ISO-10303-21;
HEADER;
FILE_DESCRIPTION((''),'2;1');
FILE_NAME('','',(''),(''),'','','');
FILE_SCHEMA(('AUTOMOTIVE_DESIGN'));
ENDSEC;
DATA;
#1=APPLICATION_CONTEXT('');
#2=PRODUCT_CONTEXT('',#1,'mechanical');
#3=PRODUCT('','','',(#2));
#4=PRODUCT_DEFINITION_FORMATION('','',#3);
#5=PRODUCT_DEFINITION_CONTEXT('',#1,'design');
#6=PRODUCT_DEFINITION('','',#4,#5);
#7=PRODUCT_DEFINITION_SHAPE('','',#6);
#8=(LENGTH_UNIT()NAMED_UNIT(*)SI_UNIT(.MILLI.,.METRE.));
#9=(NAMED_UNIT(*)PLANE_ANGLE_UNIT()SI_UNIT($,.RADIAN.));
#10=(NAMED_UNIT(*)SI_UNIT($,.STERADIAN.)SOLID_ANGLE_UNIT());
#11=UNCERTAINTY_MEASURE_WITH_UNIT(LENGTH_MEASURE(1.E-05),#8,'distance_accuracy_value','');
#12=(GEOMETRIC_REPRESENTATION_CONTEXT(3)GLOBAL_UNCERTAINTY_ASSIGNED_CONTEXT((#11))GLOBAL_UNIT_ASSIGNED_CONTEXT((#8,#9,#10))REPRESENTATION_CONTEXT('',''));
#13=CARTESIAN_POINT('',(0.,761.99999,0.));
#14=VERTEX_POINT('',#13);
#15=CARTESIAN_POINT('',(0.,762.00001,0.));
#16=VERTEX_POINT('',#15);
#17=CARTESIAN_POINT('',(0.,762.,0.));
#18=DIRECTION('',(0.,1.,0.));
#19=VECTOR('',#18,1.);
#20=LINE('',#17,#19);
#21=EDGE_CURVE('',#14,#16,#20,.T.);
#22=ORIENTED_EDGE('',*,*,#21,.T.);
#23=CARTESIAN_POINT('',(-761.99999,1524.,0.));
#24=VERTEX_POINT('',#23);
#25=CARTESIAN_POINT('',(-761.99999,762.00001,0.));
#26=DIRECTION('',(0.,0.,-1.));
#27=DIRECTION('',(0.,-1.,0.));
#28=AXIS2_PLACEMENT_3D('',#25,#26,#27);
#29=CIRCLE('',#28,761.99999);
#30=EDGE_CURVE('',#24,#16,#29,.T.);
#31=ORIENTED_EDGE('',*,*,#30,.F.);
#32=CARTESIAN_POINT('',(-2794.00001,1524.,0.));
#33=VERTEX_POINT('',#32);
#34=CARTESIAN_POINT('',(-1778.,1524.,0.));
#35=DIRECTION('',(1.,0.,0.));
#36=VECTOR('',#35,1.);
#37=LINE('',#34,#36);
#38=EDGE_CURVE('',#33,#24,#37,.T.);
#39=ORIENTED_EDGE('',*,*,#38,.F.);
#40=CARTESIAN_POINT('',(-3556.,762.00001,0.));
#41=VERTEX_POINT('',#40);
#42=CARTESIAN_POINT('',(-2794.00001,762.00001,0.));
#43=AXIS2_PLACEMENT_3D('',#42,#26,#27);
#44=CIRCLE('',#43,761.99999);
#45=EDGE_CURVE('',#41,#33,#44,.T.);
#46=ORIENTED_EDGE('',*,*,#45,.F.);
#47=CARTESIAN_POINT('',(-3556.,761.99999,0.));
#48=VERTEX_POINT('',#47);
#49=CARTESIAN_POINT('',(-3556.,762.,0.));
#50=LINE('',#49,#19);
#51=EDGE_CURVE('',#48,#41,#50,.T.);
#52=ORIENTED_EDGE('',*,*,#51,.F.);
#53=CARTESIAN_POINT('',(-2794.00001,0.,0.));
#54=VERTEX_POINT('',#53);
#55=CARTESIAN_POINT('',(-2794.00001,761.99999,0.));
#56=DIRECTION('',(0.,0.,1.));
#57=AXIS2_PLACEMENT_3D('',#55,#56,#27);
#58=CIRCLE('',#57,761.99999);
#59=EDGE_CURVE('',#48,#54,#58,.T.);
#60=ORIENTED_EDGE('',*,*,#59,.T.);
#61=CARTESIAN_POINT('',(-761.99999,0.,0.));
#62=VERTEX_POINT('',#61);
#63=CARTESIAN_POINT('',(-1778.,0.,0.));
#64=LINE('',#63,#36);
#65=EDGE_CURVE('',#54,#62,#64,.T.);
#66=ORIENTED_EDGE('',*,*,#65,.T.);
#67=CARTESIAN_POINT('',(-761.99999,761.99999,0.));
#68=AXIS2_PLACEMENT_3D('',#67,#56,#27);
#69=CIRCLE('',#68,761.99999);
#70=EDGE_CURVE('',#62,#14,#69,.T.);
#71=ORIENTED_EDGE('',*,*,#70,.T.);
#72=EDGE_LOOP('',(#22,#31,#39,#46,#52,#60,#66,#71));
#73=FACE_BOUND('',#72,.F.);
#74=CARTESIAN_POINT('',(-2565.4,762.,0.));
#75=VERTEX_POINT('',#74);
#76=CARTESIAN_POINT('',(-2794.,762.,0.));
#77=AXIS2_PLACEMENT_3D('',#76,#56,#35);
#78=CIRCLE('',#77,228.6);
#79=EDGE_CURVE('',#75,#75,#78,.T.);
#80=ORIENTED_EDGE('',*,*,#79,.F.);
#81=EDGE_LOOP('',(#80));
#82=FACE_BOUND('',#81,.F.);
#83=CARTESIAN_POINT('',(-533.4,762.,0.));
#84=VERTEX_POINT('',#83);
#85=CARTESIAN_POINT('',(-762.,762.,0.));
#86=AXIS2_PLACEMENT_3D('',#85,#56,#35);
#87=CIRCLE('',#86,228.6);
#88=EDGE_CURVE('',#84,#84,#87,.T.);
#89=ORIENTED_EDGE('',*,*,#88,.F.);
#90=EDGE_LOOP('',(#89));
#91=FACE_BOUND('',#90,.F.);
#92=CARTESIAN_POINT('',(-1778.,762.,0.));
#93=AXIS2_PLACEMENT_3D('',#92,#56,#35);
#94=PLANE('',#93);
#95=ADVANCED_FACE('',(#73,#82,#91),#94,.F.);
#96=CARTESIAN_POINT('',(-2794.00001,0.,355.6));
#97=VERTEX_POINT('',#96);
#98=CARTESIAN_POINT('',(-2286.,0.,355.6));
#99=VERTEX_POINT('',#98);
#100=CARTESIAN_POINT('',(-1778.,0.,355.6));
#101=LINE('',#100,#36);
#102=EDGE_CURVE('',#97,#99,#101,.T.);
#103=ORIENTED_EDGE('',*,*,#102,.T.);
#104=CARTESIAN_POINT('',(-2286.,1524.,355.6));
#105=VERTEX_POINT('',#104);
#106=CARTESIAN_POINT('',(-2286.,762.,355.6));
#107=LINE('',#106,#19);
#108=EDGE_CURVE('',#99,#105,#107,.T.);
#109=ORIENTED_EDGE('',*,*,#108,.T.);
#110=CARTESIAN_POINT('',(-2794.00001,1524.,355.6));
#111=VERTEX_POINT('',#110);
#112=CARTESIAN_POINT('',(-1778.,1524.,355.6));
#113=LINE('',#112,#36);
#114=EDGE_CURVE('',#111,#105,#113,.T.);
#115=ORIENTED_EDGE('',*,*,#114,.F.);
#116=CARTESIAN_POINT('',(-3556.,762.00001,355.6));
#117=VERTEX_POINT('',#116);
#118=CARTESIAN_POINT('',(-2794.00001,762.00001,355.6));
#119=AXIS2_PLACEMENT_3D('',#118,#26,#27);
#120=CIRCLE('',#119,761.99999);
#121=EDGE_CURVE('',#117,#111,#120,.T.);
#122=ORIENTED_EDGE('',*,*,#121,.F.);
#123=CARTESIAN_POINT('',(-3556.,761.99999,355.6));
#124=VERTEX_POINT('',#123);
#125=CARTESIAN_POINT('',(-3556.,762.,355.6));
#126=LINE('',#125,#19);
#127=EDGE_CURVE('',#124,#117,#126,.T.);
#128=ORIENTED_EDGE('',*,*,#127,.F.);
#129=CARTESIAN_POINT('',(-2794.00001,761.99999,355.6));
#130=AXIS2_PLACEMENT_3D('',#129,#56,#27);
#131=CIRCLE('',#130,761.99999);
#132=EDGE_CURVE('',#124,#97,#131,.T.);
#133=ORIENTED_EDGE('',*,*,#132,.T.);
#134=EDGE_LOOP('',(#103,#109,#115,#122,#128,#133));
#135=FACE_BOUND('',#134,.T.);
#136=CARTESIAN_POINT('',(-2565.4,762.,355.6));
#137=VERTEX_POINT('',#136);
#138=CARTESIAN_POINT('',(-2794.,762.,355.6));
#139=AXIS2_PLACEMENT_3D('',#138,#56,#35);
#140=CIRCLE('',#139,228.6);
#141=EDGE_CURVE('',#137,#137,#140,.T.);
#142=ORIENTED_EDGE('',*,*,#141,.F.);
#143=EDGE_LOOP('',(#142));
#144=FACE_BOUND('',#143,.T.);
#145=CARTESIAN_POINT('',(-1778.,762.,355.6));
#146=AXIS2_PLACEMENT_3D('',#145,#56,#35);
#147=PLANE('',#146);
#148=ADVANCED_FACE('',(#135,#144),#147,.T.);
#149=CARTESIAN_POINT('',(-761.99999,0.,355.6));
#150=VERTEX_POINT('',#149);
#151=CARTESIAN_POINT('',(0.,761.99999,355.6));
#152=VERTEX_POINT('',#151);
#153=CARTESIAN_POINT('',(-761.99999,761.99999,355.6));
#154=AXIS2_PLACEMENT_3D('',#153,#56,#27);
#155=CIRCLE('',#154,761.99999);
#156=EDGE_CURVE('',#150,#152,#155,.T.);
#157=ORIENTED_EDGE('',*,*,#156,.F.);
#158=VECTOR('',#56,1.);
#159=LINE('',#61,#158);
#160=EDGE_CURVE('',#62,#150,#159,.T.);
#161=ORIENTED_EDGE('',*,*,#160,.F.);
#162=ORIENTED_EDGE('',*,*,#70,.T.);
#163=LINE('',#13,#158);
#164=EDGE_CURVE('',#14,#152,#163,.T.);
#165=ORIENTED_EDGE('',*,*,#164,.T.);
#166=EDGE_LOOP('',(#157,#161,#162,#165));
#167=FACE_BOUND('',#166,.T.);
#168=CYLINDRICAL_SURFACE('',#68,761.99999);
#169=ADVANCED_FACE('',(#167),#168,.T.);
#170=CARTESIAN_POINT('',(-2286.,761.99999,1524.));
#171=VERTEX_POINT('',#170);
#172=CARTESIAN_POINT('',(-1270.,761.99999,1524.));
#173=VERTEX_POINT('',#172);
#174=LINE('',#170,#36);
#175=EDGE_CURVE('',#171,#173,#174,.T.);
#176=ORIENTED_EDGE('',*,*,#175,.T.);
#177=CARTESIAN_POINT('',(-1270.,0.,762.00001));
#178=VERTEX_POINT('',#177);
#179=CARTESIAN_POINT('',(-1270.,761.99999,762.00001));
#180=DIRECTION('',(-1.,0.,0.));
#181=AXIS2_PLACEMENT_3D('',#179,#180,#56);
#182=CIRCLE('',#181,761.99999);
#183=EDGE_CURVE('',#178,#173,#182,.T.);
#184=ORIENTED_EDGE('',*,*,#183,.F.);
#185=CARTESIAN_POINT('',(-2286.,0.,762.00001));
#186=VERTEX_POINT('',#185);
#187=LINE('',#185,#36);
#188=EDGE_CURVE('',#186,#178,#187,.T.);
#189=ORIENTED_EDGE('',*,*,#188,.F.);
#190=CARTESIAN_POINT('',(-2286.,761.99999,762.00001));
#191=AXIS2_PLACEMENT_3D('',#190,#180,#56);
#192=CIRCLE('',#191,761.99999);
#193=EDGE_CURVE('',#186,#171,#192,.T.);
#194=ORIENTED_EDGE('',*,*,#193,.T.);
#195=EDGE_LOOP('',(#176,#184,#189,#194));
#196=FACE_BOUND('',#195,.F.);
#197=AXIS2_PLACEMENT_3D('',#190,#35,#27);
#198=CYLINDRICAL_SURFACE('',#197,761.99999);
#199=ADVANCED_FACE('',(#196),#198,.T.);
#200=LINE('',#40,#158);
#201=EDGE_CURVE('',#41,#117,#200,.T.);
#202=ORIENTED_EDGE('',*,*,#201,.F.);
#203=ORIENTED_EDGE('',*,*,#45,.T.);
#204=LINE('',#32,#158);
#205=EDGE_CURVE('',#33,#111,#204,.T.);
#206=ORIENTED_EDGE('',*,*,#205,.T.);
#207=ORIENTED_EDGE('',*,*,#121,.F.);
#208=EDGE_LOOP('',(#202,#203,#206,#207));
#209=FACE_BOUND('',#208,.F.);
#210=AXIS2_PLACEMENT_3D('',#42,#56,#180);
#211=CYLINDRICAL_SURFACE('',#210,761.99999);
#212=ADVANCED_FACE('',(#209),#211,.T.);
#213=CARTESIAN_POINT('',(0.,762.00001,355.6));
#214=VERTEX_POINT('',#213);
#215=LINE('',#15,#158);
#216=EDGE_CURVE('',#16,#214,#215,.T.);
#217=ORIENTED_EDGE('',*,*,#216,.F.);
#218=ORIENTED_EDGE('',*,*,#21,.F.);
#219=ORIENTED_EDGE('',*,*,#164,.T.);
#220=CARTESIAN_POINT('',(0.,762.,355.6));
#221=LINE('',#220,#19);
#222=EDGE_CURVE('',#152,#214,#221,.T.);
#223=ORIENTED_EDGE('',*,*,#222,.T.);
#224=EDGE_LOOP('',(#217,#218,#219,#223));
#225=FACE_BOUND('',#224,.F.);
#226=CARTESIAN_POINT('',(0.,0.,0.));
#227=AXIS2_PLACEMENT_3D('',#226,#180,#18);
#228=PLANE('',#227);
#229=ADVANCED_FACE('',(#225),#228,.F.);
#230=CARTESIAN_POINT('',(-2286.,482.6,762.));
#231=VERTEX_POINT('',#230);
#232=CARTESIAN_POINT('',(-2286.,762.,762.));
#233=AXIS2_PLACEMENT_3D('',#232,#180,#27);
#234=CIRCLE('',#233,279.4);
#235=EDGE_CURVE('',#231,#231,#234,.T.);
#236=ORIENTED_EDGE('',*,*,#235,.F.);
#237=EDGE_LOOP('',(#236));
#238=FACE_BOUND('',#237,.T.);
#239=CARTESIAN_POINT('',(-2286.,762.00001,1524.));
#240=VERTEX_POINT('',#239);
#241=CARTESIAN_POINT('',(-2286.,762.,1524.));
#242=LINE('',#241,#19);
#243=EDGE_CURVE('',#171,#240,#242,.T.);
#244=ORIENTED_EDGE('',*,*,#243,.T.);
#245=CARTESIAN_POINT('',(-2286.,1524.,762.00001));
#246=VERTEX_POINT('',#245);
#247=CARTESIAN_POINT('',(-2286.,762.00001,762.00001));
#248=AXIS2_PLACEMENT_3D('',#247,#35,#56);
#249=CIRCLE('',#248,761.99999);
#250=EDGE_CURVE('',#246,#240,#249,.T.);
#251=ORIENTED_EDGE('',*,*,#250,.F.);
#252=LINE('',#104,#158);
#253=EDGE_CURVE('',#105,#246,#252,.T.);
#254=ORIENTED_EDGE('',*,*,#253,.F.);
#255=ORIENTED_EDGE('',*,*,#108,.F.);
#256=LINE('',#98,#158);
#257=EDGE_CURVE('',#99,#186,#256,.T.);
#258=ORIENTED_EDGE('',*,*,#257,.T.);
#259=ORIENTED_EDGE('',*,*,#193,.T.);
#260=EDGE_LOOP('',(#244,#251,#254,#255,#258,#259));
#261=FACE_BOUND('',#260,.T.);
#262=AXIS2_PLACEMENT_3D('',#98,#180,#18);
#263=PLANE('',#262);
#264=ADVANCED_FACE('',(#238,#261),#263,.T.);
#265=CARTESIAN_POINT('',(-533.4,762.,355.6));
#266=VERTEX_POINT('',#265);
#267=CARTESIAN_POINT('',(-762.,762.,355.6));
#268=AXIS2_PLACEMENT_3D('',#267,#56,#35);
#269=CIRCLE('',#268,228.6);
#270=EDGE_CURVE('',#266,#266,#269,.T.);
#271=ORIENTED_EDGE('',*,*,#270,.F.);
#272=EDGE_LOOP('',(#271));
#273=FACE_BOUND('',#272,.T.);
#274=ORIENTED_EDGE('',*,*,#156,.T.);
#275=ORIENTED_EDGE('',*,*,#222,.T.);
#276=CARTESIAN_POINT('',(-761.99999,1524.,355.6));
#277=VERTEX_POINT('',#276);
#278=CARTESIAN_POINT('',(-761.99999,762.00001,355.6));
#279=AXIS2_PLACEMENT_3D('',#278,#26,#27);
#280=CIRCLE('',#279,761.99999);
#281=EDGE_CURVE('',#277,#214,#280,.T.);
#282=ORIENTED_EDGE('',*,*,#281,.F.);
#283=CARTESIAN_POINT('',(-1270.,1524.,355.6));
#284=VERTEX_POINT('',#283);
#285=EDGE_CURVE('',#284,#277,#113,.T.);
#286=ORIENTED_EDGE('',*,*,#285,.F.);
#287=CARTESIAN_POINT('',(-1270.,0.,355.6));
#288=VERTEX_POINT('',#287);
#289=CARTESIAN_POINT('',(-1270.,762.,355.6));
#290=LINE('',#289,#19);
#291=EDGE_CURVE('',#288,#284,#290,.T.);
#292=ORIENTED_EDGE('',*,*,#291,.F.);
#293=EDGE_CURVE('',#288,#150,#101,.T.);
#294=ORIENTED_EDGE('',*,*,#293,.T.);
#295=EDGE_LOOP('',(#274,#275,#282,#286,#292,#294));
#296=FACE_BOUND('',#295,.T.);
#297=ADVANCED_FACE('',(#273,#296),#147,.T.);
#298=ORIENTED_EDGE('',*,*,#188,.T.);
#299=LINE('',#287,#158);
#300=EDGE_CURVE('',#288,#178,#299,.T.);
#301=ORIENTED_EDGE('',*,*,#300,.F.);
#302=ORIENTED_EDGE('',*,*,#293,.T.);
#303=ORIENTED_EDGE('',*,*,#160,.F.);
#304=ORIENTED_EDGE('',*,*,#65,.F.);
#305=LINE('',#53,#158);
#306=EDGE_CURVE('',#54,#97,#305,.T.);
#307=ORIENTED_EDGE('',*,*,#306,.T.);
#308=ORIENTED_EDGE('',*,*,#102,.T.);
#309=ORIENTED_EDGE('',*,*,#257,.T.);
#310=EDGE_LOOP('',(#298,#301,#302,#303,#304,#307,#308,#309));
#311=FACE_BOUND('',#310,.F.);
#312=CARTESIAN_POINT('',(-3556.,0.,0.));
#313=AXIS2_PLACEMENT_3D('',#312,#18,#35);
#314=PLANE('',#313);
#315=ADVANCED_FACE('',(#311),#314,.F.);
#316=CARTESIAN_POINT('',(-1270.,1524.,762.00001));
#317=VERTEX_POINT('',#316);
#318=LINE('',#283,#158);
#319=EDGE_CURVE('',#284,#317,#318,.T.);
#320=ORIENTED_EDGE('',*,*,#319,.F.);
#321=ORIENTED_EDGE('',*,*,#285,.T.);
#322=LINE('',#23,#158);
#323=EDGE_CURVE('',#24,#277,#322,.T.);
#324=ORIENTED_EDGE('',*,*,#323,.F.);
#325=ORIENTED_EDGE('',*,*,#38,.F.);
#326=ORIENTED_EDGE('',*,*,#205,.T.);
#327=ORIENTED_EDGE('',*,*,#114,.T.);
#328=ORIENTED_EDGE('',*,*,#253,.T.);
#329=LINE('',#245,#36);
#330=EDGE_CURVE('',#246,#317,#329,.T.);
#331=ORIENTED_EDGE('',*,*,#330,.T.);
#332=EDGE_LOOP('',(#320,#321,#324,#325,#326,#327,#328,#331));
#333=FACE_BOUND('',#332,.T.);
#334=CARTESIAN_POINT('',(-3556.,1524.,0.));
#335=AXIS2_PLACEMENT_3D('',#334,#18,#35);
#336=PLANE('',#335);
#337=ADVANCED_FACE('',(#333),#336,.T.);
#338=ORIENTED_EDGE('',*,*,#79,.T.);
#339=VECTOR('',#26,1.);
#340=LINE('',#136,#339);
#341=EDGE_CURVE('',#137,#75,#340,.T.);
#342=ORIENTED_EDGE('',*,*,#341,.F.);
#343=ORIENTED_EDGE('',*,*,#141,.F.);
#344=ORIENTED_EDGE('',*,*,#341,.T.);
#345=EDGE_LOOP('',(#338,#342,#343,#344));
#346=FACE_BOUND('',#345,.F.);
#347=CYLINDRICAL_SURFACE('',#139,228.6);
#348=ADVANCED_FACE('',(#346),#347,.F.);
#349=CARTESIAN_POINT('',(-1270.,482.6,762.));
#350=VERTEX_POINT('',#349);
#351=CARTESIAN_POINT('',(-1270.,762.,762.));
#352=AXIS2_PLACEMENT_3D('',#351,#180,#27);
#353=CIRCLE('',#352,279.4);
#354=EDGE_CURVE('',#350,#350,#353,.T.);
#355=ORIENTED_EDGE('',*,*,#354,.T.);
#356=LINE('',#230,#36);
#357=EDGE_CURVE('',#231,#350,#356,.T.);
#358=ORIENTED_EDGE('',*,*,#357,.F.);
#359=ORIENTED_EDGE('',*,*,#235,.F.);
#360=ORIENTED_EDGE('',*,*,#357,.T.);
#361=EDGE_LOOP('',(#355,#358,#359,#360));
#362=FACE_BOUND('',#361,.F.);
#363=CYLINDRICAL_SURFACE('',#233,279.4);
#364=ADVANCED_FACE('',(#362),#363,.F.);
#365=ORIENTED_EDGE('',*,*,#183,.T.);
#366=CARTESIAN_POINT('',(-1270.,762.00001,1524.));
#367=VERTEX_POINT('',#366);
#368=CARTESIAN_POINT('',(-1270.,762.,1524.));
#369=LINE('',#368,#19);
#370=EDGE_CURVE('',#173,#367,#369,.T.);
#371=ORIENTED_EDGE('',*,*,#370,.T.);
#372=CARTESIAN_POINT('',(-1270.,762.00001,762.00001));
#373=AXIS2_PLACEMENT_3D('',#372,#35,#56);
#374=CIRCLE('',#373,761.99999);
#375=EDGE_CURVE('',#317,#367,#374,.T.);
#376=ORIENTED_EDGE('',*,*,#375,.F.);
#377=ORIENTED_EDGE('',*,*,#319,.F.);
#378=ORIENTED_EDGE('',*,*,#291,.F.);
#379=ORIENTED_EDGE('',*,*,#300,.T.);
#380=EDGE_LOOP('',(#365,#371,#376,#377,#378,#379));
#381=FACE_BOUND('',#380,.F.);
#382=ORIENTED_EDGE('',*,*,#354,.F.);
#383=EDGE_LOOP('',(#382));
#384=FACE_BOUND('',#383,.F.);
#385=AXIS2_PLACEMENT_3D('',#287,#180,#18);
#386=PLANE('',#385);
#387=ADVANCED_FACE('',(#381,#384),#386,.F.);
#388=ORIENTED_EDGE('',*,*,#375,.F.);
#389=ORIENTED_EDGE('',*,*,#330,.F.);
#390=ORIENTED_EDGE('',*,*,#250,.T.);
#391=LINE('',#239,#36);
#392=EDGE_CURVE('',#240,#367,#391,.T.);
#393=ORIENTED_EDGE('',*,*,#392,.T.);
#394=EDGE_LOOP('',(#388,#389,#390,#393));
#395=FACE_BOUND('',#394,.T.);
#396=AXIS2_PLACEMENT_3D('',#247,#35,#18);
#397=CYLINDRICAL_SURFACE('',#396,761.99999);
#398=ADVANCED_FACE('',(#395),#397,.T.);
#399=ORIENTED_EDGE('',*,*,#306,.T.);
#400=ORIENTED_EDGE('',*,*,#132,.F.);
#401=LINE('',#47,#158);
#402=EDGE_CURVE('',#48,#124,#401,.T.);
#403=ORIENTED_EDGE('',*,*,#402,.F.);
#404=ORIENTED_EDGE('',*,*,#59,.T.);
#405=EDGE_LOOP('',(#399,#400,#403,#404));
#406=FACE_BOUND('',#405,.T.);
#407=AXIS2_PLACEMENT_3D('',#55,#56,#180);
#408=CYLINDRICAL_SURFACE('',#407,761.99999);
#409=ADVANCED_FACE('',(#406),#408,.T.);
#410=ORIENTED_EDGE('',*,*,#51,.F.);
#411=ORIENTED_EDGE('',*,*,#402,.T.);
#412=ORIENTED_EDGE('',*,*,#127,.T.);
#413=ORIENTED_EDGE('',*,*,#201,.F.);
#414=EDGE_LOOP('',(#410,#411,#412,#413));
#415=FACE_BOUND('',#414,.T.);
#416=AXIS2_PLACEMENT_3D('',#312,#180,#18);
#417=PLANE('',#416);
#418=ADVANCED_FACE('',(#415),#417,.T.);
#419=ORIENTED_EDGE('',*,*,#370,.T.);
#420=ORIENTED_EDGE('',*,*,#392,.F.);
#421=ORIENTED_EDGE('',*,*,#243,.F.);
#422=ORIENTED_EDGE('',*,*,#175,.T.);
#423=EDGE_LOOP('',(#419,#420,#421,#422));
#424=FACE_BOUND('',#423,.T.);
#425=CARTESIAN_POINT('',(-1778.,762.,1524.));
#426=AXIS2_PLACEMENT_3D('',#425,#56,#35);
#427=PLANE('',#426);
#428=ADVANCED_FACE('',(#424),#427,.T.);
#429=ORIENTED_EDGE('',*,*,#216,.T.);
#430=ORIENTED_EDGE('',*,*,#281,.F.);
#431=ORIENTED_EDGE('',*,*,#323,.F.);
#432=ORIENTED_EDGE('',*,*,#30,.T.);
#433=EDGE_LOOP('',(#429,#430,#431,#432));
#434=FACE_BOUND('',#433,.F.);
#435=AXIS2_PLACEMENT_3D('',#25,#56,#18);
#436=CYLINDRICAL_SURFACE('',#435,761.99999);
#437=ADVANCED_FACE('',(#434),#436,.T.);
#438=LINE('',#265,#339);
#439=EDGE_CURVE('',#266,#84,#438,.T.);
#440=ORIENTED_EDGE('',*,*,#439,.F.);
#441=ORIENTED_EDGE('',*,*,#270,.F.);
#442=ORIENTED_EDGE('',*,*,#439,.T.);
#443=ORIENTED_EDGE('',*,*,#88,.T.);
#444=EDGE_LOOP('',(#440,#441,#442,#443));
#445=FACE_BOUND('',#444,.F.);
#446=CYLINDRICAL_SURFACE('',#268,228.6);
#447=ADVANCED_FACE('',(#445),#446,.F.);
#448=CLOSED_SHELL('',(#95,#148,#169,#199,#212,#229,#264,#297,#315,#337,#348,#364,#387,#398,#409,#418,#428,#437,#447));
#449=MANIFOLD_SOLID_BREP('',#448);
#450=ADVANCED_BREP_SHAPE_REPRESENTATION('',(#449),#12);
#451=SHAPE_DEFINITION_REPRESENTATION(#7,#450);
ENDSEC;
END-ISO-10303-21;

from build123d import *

# Parameters (mm, degrees)
F0_W      = 3556
F0_H      = 1524
F1_DEPTH  = 355.6
F2_W      = 1016
F2_H      = 1524
F3_DEPTH  = 1168.4
F4_R      = 761.99999
F5_R      = 279.4
F6_DEPTH  = 1016
F7_R      = 228.6
F8_DEPTH  = 355.6
F9_R      = 228.6
F10_DEPTH = 355.6


# Not quite as in the source:
# - a fillet or chamfer is up to 0.001 mm smaller than in the source, because OpenCascade refuses the exact size


with BuildPart() as f1:
    # F0 (on Top) → F1 (new body)
    with BuildSketch(Plane.XY):
        with Locations((-1778, 762)):
            Rectangle(F0_W, F0_H)
    extrude(amount=F1_DEPTH)

    # F2 (on face) → F3 (join)
    with BuildSketch(Plane.XY.offset(355.6)):
        with Locations((-1778, 762)):
            Rectangle(F2_W, F2_H)
    extrude(amount=F3_DEPTH)

    # F4 (radius 762 in the source; OpenCascade refuses exactly that, so slightly less here)
    f4_edges = [f1.edges().sort_by_distance(p)[0] for p in [
        (-1778, 0, 1524),
        (0, 0, 177.8),
        (0, 1524, 177.8),
        (-3556, 0, 177.8),
        (-3556, 1524, 177.8),
        (-1778, 1524, 1524),
    ]]
    fillet(f4_edges, radius=F4_R)

    # F5 (on face) → F6 (cut)
    with BuildSketch(Plane(origin=(-2286, 0, 0), x_dir=(0, -1, 0), z_dir=(-1, 0, 0))):
        with Locations((-762, 762)):
            Circle(F5_R)
    extrude(amount=-F6_DEPTH, mode=Mode.SUBTRACT)

    # F7 (on face) → F8 (cut)
    with BuildSketch(Plane.XY.offset(355.6)):
        with Locations((-762, 762)):
            Circle(F7_R)
    extrude(amount=-F8_DEPTH, mode=Mode.SUBTRACT)

    # F9 (on face) → F10 (cut)
    with BuildSketch(Plane.XY.offset(355.6)):
        with Locations((-2794, 762)):
            Circle(F9_R)
    extrude(amount=-F10_DEPTH, mode=Mode.SUBTRACT)


solid = f1.part
